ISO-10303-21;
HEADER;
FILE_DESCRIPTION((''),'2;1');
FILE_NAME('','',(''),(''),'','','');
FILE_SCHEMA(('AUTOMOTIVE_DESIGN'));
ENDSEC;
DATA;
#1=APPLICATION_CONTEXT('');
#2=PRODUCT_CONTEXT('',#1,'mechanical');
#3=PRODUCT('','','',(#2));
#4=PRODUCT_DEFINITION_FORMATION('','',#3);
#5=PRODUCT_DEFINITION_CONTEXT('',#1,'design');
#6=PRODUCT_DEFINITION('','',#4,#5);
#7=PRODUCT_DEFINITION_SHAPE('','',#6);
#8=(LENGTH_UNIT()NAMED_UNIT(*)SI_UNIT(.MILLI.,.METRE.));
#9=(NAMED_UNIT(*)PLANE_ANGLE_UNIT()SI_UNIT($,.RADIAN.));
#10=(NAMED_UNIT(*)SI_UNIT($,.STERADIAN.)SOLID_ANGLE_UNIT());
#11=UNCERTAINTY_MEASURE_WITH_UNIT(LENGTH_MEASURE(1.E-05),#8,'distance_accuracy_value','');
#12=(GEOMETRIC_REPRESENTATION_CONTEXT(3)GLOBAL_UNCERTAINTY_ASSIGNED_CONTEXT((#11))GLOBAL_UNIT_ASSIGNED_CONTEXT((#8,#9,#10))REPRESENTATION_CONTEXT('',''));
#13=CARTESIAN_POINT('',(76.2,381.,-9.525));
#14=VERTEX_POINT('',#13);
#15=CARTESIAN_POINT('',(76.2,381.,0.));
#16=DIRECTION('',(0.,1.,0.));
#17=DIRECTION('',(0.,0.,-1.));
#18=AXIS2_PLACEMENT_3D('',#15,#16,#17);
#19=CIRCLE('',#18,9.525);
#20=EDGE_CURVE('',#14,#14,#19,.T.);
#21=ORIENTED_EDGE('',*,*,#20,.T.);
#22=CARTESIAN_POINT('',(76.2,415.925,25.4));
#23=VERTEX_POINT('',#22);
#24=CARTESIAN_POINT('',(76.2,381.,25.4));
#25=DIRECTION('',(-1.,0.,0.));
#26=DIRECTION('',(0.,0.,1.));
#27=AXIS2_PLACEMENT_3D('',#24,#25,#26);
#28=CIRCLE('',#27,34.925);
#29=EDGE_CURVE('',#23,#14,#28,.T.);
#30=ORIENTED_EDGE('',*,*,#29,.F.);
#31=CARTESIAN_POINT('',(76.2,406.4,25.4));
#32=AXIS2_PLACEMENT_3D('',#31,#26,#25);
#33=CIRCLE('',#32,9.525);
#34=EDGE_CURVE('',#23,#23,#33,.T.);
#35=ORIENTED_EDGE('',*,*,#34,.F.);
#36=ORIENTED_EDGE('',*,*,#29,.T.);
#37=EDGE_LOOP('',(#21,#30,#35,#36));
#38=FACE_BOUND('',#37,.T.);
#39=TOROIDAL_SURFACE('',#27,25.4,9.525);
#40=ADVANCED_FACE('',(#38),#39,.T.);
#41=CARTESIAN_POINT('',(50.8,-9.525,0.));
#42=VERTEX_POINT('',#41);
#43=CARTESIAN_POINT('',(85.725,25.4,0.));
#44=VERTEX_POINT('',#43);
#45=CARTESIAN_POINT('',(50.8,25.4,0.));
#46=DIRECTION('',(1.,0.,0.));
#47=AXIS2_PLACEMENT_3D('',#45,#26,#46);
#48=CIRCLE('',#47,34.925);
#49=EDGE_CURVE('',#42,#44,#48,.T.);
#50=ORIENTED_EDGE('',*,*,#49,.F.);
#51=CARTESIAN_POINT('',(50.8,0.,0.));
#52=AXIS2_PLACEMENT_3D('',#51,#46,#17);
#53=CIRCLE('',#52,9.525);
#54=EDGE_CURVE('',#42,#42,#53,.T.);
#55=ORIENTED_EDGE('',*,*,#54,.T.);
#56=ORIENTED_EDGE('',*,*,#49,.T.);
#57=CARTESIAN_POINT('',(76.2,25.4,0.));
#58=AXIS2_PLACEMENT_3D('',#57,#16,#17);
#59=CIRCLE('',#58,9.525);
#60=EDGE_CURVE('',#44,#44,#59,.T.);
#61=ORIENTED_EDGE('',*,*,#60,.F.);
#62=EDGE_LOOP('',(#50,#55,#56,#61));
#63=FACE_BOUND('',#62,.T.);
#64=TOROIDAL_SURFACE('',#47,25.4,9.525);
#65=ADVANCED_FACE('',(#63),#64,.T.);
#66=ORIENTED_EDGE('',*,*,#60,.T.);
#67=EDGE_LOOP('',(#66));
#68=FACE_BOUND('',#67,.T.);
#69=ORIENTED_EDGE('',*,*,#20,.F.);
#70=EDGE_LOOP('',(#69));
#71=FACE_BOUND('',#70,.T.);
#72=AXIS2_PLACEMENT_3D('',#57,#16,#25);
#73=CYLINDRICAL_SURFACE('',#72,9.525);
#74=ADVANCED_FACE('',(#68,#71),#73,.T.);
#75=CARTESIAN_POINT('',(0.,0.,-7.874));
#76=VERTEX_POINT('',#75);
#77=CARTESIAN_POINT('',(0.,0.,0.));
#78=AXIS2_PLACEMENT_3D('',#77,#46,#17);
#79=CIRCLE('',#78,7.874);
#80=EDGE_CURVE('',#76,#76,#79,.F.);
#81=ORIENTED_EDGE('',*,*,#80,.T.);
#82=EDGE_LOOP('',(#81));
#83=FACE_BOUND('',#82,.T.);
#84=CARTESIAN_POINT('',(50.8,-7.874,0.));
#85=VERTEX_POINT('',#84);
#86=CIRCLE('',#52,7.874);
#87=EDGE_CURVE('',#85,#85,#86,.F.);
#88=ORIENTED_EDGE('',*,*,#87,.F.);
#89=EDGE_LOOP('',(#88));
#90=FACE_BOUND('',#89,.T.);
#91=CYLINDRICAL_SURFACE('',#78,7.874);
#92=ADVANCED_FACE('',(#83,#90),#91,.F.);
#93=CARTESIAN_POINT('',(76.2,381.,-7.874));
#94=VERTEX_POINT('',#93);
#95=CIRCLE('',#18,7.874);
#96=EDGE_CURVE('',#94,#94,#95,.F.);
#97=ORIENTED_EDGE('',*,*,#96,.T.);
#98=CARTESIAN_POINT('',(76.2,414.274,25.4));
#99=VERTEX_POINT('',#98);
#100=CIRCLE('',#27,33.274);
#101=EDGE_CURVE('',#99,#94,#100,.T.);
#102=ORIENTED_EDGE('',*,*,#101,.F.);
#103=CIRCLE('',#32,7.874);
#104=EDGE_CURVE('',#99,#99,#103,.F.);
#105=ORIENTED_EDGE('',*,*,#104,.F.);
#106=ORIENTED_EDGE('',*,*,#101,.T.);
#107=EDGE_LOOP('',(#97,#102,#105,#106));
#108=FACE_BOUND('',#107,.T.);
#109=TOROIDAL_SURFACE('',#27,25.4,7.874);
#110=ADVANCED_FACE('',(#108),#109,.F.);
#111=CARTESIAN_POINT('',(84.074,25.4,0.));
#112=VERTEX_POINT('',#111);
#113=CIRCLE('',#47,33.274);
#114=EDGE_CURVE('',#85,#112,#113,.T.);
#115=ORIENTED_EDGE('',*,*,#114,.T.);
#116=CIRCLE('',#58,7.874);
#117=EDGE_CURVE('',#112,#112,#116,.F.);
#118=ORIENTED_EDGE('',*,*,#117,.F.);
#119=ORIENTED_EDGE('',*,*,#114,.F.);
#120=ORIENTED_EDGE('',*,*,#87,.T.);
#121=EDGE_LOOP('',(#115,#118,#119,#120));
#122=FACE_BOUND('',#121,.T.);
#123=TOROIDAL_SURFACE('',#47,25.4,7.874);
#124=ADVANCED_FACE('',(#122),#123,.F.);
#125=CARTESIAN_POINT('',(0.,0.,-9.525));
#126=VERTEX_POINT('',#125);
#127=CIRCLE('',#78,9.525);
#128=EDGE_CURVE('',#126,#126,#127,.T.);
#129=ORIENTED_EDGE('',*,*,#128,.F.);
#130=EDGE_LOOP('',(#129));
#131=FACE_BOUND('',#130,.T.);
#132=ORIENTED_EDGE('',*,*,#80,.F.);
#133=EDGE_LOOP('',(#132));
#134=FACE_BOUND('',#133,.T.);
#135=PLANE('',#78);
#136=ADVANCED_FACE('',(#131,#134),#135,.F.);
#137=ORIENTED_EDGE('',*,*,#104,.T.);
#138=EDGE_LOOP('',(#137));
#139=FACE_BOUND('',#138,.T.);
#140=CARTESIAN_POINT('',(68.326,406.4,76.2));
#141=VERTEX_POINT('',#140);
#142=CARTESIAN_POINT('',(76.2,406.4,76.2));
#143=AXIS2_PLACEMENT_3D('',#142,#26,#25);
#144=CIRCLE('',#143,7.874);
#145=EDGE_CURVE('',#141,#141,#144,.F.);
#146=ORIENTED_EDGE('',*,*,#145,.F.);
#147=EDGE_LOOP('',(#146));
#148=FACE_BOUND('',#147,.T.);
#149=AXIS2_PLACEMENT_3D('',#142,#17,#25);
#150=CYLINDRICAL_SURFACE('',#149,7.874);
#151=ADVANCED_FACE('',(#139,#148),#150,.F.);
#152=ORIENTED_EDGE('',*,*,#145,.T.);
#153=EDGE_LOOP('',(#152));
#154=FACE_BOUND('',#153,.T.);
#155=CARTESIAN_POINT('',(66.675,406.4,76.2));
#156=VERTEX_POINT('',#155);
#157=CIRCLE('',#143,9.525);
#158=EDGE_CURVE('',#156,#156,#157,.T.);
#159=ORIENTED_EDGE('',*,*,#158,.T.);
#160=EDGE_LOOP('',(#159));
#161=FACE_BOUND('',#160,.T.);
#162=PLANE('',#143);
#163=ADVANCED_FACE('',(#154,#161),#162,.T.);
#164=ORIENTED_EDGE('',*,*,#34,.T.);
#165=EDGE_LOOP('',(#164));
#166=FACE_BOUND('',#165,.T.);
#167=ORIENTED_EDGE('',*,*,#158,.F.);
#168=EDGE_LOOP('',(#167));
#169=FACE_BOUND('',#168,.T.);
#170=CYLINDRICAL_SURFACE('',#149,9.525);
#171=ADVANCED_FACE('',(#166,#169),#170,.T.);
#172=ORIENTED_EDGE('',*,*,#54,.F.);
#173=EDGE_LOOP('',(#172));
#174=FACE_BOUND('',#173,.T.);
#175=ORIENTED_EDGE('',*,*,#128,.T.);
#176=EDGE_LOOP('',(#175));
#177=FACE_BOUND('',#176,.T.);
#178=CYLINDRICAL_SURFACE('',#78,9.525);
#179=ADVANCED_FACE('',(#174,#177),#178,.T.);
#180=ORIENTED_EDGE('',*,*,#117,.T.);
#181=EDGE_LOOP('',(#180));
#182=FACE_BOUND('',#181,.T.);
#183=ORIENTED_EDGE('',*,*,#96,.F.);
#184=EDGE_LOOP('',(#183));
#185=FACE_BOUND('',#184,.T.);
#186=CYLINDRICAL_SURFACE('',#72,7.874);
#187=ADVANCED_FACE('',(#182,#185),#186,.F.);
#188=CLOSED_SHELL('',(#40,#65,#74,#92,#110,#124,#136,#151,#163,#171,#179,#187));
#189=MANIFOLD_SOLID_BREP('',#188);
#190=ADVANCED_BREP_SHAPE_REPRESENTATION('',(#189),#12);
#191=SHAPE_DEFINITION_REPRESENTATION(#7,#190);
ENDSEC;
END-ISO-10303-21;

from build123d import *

# Parameters (mm, degrees)
SKETCH1_R            = 9.525
SKETCH1_R_2          = 7.874
SWEEP2_START         = 25.3999999
SWEEP2_OUTLINE_R     = 9.525
SWEEP2_OUTLINE_R_2   = 7.874
SWEEP2_DEPTH         = 50.8000001
SWEEP2_2_OUTLINE_R   = 9.525
SWEEP2_2_OUTLINE_R_2 = 7.874
SWEEP2_2_ANGLE       = 90


with BuildPart() as part:
    # Sweep1: sweep along a path in Sketch2
    with BuildLine(Plane.XY) as sweep1_path:
        Line((76.2, 381), (76.2, 25.4))
        ThreePointArc((76.2, 25.4), (68.760512242, 7.439487758), (50.8, 0))
        Line((50.8, 0), (0, 0))
    # Sketch1 → Sweep1 (sweep)
    with BuildSketch(Plane(origin=(0, 0, 0), x_dir=(0, -1, 0), z_dir=(1, 0, 0))):
        Circle(SKETCH1_R)
        Circle(SKETCH1_R_2, mode=Mode.SUBTRACT)
    sweep(path=sweep1_path.line)



with BuildPart() as body_2:
    # Sweep2: read off the stored shape, not the designer's step
    # Sweep2 outline → Sweep2 (new body)
    with BuildSketch(Plane.XY.offset(SWEEP2_START)):
        with Locations((76.2, 406.4)):
            Circle(SWEEP2_OUTLINE_R)
        with Locations((76.2, 406.4)):
            Circle(SWEEP2_OUTLINE_R_2, mode=Mode.SUBTRACT)
    extrude(amount=SWEEP2_DEPTH)


with BuildPart() as part_1:
    add(part.part)

    add(body_2.part)  # Sweep2 2 merges body 2
    # Sweep2 2 outline → Sweep2 2 (revolve)
    with BuildSketch(Plane(origin=(0, 381, 25.4), x_dir=(0, 0, -1), z_dir=(0, -1, 0))):
        with Locations((25.4, 76.2)):
            Circle(SWEEP2_2_OUTLINE_R)
        with Locations((25.4, 76.2)):
            Circle(SWEEP2_2_OUTLINE_R_2, mode=Mode.SUBTRACT)
    revolve(axis=Axis((0, 381, 25.4), (1, 0, 0)), revolution_arc=SWEEP2_2_ANGLE)


solid = part_1.part
